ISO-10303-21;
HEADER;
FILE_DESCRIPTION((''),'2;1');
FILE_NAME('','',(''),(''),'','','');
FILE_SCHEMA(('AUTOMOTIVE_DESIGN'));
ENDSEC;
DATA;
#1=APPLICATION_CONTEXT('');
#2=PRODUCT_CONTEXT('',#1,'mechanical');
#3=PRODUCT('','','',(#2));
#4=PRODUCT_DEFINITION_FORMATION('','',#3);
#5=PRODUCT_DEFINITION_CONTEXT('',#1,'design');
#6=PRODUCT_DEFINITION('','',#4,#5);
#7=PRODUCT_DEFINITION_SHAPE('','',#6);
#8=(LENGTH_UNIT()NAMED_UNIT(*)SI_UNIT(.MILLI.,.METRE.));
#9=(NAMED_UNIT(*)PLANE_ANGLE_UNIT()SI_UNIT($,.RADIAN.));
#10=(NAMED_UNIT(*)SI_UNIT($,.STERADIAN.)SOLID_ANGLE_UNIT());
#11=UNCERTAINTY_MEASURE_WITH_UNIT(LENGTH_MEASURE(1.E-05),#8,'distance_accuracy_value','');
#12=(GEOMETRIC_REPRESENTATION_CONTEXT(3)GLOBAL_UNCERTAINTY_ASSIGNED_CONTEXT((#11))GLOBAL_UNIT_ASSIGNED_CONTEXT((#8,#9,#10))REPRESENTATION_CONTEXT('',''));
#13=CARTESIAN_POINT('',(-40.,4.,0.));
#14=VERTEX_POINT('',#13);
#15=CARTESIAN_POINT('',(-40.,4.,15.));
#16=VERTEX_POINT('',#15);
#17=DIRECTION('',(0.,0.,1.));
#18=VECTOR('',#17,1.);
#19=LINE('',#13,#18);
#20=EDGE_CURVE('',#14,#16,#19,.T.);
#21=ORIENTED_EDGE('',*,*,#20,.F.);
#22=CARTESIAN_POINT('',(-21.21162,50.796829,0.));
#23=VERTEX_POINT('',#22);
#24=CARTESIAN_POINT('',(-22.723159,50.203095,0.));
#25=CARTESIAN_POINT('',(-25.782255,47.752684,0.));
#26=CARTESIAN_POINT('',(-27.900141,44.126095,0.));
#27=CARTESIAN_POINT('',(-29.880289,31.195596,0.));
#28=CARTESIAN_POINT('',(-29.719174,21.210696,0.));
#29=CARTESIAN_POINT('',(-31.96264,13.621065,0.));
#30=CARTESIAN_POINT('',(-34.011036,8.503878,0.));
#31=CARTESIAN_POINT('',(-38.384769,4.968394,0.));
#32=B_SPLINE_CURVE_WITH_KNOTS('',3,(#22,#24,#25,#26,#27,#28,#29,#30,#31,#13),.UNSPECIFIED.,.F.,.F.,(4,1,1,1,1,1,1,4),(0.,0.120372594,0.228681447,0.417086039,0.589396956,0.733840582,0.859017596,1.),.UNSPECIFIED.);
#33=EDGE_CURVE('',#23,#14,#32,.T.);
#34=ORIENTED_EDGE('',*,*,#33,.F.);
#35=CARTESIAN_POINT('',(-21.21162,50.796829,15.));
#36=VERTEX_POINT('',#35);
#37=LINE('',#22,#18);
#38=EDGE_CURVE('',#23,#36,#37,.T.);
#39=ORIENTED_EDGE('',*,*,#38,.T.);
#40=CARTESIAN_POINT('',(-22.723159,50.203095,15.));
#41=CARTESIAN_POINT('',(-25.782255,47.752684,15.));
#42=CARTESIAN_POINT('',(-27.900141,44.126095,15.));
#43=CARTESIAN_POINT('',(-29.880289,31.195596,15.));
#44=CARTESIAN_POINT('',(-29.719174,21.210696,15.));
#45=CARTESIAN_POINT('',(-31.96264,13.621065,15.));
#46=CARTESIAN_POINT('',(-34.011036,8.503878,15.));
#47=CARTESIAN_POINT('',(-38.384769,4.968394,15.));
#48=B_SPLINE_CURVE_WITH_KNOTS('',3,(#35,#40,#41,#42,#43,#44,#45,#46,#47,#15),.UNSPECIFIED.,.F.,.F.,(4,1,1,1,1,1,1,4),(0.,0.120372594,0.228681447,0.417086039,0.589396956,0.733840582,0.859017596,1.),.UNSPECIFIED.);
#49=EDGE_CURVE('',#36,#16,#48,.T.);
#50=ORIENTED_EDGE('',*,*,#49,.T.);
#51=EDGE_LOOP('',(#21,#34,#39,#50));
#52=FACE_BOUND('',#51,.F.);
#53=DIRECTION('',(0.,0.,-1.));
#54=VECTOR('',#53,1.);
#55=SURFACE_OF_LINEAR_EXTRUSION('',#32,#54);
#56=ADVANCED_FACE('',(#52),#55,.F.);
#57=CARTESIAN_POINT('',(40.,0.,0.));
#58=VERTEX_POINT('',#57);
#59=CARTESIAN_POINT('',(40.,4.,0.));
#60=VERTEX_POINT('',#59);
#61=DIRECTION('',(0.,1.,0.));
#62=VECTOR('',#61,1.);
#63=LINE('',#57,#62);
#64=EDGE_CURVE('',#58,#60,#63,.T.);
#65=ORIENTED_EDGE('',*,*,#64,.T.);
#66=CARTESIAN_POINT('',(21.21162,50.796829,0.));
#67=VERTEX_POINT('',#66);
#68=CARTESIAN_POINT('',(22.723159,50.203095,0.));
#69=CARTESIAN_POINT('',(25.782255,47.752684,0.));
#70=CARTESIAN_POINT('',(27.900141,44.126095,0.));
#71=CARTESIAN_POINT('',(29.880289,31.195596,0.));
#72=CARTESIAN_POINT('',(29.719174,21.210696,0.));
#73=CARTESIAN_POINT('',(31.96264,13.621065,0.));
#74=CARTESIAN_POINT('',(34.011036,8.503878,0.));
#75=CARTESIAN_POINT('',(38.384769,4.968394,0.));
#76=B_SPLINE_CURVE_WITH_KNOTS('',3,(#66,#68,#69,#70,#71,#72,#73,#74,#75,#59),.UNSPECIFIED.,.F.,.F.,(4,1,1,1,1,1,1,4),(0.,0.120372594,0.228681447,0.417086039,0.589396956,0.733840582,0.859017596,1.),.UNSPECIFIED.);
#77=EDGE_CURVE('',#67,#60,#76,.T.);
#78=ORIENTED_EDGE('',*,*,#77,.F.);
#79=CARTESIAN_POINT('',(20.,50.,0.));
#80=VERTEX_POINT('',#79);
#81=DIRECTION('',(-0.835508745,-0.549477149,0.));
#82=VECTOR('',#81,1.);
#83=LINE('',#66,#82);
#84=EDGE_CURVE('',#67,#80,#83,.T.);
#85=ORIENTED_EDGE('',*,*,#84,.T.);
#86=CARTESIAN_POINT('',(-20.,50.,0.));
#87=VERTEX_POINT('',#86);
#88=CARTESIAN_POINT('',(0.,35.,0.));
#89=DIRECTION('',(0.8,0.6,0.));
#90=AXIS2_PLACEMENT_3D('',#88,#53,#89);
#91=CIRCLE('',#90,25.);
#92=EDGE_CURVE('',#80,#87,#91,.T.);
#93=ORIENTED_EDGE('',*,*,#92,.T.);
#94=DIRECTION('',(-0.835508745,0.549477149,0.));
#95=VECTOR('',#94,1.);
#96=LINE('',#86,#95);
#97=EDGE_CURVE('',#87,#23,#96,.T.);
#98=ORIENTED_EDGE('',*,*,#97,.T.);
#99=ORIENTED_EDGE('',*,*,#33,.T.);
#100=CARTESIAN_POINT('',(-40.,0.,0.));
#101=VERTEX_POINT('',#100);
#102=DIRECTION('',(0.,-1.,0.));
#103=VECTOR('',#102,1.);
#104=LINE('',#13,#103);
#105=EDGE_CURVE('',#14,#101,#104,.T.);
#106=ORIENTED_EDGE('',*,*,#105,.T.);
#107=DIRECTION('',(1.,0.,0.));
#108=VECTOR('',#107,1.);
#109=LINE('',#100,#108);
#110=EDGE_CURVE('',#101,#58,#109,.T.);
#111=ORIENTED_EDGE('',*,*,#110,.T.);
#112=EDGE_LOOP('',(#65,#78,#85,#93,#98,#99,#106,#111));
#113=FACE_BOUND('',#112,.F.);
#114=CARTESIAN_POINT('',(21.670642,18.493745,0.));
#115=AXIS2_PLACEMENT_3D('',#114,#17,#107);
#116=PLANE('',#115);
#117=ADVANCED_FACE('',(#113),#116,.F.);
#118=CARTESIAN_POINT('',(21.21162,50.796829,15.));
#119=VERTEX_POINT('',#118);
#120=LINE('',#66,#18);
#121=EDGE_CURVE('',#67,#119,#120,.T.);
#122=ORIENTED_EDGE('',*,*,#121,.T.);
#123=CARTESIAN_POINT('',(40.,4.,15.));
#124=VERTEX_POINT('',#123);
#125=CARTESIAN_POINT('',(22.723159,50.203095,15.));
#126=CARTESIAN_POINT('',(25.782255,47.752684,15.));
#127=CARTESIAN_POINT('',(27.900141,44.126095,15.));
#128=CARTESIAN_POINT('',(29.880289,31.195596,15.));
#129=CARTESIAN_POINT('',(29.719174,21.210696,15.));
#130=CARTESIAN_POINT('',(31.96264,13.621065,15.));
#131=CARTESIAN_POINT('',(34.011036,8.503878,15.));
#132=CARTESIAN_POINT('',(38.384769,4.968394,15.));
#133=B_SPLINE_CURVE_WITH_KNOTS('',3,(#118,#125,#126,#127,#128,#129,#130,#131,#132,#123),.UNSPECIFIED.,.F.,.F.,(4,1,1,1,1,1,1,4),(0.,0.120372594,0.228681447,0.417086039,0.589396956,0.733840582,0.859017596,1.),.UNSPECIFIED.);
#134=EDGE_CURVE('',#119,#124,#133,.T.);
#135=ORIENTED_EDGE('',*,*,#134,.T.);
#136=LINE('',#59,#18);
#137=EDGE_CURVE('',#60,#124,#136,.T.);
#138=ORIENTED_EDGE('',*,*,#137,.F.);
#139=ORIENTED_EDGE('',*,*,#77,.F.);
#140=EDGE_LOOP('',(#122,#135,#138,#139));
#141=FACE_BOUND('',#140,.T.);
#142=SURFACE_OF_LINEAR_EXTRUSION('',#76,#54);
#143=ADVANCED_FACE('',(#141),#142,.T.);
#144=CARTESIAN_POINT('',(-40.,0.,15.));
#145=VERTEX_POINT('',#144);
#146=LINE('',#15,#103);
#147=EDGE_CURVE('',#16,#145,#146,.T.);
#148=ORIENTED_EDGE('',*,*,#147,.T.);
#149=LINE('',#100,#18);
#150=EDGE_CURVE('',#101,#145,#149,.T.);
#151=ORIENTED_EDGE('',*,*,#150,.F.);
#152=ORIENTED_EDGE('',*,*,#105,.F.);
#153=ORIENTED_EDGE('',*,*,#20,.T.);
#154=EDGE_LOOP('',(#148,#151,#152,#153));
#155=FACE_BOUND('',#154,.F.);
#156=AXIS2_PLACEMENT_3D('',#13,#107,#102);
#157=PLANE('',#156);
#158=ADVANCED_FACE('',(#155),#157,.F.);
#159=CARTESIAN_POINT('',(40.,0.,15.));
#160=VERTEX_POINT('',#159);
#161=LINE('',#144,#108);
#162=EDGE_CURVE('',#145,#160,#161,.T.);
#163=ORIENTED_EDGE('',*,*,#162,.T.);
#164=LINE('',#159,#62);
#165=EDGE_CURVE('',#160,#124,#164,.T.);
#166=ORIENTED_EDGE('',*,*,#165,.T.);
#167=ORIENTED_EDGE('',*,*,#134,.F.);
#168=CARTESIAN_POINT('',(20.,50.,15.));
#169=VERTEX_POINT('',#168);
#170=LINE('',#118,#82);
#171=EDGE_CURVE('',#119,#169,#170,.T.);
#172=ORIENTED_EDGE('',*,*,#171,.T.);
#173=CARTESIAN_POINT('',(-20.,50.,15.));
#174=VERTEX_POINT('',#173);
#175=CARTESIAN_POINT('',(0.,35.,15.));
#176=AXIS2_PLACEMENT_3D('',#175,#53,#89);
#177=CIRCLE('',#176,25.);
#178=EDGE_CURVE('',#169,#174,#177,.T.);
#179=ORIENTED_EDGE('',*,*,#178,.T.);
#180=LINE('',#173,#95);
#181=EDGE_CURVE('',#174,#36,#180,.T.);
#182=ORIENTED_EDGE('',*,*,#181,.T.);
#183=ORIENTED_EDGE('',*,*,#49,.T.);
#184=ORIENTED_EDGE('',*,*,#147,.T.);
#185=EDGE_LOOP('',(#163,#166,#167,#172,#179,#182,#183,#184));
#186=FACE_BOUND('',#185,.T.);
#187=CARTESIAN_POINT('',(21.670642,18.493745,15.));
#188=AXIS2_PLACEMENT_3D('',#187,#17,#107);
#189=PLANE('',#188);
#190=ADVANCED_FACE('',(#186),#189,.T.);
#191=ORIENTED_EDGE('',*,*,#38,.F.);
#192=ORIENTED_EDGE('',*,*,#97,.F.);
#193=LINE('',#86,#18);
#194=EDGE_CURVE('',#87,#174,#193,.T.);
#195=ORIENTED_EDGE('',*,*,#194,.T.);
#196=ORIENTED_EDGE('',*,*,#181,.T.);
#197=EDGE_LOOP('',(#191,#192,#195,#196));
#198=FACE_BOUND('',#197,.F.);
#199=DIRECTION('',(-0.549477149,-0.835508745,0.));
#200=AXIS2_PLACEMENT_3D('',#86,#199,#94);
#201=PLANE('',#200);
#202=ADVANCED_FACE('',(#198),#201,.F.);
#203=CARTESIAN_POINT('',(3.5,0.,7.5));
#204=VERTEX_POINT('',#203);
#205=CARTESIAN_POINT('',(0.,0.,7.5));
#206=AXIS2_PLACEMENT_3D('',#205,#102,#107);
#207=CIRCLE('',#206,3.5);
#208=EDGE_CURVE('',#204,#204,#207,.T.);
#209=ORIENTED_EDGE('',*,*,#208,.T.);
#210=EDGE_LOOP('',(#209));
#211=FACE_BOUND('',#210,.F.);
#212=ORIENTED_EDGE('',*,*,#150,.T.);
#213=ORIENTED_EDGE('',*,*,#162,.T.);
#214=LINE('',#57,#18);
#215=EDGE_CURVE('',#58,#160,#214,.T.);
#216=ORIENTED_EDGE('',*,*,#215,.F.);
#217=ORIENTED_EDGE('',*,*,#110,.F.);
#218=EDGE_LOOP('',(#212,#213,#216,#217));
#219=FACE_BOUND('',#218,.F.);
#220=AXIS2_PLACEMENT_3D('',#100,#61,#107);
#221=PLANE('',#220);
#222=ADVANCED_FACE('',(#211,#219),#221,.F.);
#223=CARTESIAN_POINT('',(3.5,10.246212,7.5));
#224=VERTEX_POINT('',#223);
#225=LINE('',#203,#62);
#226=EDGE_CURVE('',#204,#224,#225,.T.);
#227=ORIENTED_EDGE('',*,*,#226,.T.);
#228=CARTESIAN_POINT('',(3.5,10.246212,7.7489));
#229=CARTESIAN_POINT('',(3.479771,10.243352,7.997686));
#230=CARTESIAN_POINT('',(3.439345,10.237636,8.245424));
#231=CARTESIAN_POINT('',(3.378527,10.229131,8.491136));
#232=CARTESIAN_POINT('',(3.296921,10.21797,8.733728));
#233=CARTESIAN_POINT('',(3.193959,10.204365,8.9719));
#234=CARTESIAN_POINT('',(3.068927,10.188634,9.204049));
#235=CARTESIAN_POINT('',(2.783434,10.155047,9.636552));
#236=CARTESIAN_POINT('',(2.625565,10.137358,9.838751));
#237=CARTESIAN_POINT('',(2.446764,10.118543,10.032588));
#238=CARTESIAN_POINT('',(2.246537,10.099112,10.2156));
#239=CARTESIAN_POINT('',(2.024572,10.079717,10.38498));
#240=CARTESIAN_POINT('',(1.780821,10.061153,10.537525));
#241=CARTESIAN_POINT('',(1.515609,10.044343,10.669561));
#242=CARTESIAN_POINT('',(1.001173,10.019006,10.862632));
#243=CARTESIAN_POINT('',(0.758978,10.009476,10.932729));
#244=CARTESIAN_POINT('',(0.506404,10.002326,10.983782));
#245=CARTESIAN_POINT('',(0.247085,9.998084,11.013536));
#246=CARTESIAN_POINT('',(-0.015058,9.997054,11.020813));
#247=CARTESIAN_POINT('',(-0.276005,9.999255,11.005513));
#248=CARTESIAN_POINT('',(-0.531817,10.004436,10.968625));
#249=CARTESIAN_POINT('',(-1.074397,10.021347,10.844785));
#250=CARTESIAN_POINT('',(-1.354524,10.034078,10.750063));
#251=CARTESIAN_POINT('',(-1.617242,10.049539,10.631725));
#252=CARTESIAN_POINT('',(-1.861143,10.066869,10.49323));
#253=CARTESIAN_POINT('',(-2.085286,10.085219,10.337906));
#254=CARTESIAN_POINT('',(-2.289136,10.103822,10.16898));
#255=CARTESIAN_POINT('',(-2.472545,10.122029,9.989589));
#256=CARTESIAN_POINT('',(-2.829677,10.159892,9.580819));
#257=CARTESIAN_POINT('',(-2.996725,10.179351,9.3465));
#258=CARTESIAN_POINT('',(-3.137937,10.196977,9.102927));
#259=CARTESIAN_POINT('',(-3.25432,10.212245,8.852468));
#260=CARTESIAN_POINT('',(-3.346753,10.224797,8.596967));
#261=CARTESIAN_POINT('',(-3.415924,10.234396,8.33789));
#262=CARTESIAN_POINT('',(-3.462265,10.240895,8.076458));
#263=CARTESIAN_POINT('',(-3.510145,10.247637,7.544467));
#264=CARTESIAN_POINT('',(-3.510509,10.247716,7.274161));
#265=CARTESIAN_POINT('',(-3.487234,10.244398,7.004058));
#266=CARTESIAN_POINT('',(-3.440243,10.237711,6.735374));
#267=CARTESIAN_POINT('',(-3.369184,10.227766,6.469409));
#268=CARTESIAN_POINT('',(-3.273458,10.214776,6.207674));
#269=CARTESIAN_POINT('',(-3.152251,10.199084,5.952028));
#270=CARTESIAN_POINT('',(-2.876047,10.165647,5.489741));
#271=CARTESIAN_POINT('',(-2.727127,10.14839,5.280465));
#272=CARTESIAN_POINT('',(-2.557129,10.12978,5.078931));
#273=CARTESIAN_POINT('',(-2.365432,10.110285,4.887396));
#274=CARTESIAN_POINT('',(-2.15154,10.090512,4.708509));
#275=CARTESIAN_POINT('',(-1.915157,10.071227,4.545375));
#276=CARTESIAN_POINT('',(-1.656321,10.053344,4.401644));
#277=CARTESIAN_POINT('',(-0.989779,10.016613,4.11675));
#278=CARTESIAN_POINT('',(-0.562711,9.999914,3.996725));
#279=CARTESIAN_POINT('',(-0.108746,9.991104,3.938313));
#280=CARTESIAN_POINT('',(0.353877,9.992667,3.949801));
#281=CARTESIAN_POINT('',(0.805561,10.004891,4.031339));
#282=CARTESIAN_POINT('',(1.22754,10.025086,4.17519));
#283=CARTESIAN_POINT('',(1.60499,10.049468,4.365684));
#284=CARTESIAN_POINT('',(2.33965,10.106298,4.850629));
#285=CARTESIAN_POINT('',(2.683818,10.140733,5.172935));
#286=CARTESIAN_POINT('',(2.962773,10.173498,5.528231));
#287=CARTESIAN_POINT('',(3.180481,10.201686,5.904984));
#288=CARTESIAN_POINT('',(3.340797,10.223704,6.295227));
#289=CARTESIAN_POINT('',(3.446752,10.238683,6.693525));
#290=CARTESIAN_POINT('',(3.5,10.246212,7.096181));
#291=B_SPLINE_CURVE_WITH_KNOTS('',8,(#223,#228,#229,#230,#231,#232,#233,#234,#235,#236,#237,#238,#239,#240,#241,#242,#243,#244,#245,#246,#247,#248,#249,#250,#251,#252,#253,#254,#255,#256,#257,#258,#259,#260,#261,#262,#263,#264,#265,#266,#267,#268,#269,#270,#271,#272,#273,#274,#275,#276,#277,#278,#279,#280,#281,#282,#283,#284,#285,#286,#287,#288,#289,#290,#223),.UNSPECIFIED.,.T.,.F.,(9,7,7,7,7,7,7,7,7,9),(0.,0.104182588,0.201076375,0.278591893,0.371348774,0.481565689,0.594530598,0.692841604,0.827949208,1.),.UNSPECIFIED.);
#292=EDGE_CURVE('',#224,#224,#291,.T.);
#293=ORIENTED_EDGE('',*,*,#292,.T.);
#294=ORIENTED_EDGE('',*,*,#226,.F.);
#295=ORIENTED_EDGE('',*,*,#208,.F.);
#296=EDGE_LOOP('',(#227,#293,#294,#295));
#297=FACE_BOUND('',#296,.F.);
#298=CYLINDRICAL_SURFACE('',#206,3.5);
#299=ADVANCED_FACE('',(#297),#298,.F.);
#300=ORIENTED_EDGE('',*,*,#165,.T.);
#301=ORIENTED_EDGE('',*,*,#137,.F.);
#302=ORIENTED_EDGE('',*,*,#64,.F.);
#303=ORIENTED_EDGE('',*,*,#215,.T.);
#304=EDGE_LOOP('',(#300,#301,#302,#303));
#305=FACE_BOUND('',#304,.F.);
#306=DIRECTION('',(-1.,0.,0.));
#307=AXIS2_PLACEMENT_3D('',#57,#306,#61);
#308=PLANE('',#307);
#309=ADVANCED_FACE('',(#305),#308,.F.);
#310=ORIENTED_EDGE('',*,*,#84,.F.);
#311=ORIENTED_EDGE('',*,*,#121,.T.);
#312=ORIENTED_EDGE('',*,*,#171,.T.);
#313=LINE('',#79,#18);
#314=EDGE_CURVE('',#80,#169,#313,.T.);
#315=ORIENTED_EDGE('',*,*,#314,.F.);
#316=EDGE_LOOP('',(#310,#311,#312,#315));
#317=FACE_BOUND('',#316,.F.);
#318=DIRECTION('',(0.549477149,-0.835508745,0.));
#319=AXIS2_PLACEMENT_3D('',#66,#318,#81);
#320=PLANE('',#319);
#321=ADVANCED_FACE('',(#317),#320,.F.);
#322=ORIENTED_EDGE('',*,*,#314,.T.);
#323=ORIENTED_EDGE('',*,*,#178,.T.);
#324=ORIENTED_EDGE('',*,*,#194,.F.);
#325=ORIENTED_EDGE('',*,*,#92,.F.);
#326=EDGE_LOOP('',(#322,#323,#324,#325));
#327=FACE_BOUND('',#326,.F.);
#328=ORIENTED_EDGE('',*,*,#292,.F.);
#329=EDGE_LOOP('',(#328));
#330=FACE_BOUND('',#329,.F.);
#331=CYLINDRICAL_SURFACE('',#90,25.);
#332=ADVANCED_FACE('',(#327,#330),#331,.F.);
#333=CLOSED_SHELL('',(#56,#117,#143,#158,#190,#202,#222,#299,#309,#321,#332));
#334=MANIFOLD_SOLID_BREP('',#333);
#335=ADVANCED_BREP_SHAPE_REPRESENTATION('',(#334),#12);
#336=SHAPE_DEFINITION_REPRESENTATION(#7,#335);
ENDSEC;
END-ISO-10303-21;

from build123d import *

# Parameters (mm, degrees)
F1_DEPTH = 15
F2_R     = 3.5
F3_DEPTH = 25


with BuildPart() as f1:
    # F0 (on Top) → F1 (new body)
    with BuildSketch(Plane.XY):
        with BuildLine():
            ThreePointArc((20, 50), (22.360679775, 23.8196601125), (0, 10))
            Line((0, 10), (0, 0))
            Line((0, 0), (40, 0))
            Line((40, 0), (40, 4))
            add(Edge.make_bspline(
                [(21.2116204202, 50.796829164), (22.723159163, 50.2030951154), (25.7822546717, 47.7526835762), (27.9001408447, 44.1260945679), (29.8802889933, 31.195596433), (29.7191742065, 21.2106955797), (31.9626402727, 13.6210645558), (34.0110364625, 8.503878025), (38.3847694363, 4.9683936974), (40, 4)],
                knots=[0, 0, 0, 0, 0.1203725941, 0.2286814467, 0.417086039, 0.5893969564, 0.7338405817, 0.8590175959, 1, 1, 1, 1], degree=3))
            Line((21.2116204202, 50.796829164), (20, 50))
        make_face()
        with BuildLine():
            Line((0, 0), (0, 10))
            ThreePointArc((0, 10), (-22.360679775, 23.8196601125), (-20, 50))
            Line((-20, 50), (-21.2116204202, 50.796829164))
            add(Edge.make_bspline(
                [(-21.2116204202, 50.796829164), (-22.723159163, 50.2030951154), (-25.7822546717, 47.7526835762), (-27.9001408447, 44.1260945679), (-29.8802889933, 31.195596433), (-29.7191742065, 21.2106955797), (-31.9626402727, 13.6210645558), (-34.0110364625, 8.503878025), (-38.3847694363, 4.9683936974), (-40, 4)],
                knots=[0, 0, 0, 0, 0.1203725941, 0.2286814467, 0.417086039, 0.5893969564, 0.7338405817, 0.8590175959, 1, 1, 1, 1], degree=3))
            Line((-40, 4), (-40, 0))
            Line((-40, 0), (0, 0))
        make_face()
    extrude(amount=F1_DEPTH)

    # F2 (on face) → F3 (cut)
    with BuildSketch(Plane.XZ):
        with Locations((0, 7.5)):
            Circle(F2_R)
    extrude(amount=-F3_DEPTH, mode=Mode.SUBTRACT)


solid = f1.part
